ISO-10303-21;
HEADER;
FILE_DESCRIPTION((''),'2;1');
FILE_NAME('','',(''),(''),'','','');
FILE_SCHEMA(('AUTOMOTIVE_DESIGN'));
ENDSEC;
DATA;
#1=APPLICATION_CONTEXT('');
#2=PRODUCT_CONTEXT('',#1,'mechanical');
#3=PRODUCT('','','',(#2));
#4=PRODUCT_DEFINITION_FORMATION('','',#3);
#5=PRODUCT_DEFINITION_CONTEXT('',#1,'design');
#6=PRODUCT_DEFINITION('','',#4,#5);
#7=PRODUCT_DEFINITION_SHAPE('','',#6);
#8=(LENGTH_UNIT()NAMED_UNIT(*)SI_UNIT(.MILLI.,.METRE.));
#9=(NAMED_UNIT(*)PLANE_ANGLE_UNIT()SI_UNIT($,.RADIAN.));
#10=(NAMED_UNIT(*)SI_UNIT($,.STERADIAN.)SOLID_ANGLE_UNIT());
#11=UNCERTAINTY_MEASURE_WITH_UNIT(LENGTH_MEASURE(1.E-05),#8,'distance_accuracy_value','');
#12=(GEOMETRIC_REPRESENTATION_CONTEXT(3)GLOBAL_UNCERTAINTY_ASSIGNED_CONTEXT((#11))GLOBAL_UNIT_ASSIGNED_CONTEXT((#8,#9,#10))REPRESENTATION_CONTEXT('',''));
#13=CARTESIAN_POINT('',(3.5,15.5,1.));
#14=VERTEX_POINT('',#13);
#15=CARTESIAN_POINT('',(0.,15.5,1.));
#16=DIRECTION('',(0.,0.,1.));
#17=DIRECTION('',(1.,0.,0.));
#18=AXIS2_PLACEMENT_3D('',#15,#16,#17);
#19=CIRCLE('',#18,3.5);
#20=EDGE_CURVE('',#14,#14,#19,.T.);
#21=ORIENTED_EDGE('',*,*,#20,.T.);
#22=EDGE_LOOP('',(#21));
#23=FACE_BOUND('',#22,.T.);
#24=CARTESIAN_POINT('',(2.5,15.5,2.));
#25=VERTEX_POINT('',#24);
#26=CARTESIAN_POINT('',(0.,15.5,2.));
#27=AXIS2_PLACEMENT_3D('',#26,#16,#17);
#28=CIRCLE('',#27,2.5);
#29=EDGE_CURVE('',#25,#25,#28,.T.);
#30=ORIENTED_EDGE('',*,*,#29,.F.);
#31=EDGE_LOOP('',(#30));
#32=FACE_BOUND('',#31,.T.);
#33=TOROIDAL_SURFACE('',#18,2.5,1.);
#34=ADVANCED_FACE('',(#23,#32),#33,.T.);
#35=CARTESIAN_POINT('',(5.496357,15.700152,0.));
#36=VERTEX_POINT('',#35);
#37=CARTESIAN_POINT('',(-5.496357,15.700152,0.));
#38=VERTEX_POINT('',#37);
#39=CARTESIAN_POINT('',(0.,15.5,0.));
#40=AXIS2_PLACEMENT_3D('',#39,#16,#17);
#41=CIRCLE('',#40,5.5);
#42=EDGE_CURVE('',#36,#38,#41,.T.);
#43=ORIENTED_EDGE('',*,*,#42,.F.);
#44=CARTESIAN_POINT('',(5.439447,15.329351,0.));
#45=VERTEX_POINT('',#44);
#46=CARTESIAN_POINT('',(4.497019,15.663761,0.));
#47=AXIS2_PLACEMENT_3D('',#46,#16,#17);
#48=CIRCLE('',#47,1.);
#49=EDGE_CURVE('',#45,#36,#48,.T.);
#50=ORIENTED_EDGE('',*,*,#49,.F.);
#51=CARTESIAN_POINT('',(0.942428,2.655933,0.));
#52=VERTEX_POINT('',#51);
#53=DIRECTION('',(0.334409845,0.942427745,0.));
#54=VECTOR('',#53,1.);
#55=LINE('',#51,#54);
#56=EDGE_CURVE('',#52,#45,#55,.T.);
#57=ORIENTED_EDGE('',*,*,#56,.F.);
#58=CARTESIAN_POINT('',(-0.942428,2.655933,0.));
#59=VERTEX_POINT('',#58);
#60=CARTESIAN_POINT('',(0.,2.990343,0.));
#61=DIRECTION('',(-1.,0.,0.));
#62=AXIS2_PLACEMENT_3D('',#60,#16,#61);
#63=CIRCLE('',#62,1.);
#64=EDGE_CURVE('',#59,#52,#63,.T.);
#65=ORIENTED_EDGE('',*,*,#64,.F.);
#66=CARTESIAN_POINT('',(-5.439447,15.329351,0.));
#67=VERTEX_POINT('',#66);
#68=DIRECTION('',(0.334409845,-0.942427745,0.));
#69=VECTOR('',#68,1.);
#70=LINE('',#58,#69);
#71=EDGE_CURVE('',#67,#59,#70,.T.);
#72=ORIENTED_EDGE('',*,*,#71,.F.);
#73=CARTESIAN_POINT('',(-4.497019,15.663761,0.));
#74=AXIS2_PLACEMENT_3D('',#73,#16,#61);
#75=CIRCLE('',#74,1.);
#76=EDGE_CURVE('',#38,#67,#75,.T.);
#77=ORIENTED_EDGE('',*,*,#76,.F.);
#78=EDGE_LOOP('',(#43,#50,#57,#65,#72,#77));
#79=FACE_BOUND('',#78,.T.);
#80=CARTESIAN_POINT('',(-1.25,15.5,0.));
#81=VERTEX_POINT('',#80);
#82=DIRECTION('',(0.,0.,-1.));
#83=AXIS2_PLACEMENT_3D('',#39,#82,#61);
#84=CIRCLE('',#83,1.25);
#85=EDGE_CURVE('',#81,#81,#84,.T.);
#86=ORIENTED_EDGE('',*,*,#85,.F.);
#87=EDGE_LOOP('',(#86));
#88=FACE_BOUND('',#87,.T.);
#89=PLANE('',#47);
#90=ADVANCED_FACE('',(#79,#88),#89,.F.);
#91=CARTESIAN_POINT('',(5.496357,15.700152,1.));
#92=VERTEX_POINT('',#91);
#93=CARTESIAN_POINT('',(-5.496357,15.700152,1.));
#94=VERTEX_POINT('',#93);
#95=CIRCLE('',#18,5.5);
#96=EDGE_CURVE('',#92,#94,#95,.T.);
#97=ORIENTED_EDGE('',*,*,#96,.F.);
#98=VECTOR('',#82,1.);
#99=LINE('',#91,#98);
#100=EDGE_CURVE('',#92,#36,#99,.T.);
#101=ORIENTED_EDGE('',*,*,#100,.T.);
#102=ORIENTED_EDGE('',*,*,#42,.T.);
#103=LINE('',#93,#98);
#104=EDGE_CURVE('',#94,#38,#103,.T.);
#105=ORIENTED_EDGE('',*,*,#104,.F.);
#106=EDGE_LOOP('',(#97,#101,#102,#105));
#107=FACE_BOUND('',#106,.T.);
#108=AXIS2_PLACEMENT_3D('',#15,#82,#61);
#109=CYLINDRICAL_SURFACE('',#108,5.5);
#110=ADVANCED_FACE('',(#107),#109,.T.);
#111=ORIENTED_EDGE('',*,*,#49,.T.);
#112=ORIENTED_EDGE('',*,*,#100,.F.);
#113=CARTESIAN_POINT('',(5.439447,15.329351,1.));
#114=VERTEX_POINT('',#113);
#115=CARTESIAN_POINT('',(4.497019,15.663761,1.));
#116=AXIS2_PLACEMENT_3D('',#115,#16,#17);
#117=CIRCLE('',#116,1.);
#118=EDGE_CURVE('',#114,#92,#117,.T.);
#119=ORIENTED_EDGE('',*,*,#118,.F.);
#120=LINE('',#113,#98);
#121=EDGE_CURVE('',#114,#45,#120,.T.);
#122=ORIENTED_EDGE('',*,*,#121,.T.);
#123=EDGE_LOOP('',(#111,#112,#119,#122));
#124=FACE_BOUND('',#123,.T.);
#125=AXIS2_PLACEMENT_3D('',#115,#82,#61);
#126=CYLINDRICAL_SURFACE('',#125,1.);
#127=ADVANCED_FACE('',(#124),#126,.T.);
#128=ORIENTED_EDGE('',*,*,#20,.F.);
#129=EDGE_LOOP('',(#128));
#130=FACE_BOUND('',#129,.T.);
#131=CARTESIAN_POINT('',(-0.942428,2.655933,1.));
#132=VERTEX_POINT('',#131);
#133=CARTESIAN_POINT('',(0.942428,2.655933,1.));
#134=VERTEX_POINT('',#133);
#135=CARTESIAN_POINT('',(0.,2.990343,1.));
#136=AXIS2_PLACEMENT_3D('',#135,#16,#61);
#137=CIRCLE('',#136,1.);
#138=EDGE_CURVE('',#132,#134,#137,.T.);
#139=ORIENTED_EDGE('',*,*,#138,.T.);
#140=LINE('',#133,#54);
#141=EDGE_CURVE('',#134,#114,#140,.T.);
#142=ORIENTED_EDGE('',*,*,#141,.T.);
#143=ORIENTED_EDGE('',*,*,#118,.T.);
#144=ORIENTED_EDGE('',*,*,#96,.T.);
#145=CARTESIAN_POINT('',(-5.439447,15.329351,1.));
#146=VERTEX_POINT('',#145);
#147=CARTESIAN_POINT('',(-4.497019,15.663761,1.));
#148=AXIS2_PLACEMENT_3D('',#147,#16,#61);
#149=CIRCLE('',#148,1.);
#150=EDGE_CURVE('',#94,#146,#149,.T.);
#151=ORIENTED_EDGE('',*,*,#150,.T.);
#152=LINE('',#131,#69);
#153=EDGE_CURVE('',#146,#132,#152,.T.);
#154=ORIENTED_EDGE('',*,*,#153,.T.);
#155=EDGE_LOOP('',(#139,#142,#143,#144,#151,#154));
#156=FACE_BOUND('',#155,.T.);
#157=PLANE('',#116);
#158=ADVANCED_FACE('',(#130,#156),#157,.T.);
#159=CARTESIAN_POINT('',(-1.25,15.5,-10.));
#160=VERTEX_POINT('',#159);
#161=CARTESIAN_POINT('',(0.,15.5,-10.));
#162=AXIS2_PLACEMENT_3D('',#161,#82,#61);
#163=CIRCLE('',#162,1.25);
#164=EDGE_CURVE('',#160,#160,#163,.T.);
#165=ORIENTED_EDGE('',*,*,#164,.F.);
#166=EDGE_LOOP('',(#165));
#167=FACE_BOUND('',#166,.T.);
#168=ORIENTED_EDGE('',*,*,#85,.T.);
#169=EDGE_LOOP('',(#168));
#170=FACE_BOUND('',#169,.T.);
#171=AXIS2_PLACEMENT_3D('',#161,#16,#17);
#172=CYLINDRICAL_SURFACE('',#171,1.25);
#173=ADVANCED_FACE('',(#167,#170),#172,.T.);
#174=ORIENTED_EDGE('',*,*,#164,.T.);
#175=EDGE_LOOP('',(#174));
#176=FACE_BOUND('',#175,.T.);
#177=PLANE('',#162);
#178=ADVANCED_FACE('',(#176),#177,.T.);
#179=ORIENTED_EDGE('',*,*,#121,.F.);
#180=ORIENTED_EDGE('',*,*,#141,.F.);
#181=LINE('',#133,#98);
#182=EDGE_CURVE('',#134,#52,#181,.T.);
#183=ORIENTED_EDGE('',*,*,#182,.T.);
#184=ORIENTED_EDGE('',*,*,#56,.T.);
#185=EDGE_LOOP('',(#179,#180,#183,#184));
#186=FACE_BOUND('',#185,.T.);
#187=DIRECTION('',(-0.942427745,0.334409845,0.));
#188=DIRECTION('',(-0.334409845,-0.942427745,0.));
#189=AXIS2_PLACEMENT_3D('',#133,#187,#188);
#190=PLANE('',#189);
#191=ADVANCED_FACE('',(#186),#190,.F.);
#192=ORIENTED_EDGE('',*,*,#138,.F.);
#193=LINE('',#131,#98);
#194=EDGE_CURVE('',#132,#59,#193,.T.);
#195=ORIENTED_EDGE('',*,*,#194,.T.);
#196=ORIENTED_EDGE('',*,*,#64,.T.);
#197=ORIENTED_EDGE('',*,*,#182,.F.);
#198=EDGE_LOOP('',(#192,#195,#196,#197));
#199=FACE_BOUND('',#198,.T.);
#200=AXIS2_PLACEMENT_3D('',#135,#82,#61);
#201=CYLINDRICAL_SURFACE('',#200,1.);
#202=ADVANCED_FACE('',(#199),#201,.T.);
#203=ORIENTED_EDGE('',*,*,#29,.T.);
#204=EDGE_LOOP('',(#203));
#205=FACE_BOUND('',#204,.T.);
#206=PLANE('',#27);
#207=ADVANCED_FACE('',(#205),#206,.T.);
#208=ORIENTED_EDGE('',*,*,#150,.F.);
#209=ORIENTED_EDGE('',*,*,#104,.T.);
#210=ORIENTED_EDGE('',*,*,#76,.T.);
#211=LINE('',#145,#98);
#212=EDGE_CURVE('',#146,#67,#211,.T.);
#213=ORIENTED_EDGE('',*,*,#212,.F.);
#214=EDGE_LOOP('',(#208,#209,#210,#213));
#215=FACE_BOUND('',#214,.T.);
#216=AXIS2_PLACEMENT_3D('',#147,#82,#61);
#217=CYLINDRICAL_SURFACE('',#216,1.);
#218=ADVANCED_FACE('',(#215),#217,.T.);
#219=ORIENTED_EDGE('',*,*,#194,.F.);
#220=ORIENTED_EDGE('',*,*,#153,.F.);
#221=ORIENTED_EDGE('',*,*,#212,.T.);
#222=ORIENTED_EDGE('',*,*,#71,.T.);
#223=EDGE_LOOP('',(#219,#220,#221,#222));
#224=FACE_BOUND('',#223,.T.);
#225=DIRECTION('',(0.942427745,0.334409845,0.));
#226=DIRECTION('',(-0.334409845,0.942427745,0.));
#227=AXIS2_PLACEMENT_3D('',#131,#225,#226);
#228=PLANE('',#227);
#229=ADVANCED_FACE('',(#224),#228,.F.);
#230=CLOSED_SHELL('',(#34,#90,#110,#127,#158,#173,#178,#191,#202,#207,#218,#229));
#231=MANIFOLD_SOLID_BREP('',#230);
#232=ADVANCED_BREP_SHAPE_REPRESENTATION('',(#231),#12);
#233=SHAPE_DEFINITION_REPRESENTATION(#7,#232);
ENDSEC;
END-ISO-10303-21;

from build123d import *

# Parameters (mm, degrees)
DODANIE_WYCI_GNI_CIE1_DEPTH = 1
SZKIC2_R                    = 3.5
DODANIE_WYCI_GNI_CIE2_DEPTH = 1
SZKIC3_R                    = 1.25
DODANIE_WYCI_GNI_CIE3_DEPTH = 10
ZAOKR_GLENIE1_R             = 1


with BuildPart() as part:
    # Szkic1 → Dodanie-wyciągnięcie1 (new body)
    with BuildSketch(Plane.XY):
        with BuildLine():
            Line((0.942427745, 2.655932737), (5.439447033, 15.32935073))
            ThreePointArc((5.439447033, 15.32935073), (5.485445584, 15.51205871), (5.496356907, 15.700151814))
            ThreePointArc((5.496356907, 15.700151814), (0, 21), (-5.496356907, 15.700151814))
            ThreePointArc((-5.496356907, 15.700151814), (-5.485445584, 15.51205871), (-5.439447033, 15.32935073))
            Line((-5.439447033, 15.32935073), (-0.942427745, 2.655932737))
            ThreePointArc((-0.942427745, 2.655932737), (0, 1.990342582), (0.942427745, 2.655932737))
        make_face()
    extrude(amount=DODANIE_WYCI_GNI_CIE1_DEPTH)

    # Szkic2 → Dodanie-wyciągnięcie2 (add)
    with BuildSketch(Plane.XY.offset(1)):
        with Locations((0, 15.5)):
            Circle(SZKIC2_R)
    extrude(amount=DODANIE_WYCI_GNI_CIE2_DEPTH)

    # Szkic3 → Dodanie-wyciągnięcie3 (add)
    with BuildSketch(Plane(origin=(0, 0, 0), x_dir=(-1, 0, 0), z_dir=(0, 0, -1))):
        with Locations((0, 15.5)):
            Circle(SZKIC3_R)
    extrude(amount=DODANIE_WYCI_GNI_CIE3_DEPTH)

    # Zaokrąglenie1
    zaokr_glenie1_edges = [part.edges().sort_by_distance(p)[0] for p in [
        (-3.5, 15.5, 2),
    ]]
    fillet(zaokr_glenie1_edges, radius=ZAOKR_GLENIE1_R - 0.0001)  # a hair under: the kernel refuses the full size


solid = part.part
